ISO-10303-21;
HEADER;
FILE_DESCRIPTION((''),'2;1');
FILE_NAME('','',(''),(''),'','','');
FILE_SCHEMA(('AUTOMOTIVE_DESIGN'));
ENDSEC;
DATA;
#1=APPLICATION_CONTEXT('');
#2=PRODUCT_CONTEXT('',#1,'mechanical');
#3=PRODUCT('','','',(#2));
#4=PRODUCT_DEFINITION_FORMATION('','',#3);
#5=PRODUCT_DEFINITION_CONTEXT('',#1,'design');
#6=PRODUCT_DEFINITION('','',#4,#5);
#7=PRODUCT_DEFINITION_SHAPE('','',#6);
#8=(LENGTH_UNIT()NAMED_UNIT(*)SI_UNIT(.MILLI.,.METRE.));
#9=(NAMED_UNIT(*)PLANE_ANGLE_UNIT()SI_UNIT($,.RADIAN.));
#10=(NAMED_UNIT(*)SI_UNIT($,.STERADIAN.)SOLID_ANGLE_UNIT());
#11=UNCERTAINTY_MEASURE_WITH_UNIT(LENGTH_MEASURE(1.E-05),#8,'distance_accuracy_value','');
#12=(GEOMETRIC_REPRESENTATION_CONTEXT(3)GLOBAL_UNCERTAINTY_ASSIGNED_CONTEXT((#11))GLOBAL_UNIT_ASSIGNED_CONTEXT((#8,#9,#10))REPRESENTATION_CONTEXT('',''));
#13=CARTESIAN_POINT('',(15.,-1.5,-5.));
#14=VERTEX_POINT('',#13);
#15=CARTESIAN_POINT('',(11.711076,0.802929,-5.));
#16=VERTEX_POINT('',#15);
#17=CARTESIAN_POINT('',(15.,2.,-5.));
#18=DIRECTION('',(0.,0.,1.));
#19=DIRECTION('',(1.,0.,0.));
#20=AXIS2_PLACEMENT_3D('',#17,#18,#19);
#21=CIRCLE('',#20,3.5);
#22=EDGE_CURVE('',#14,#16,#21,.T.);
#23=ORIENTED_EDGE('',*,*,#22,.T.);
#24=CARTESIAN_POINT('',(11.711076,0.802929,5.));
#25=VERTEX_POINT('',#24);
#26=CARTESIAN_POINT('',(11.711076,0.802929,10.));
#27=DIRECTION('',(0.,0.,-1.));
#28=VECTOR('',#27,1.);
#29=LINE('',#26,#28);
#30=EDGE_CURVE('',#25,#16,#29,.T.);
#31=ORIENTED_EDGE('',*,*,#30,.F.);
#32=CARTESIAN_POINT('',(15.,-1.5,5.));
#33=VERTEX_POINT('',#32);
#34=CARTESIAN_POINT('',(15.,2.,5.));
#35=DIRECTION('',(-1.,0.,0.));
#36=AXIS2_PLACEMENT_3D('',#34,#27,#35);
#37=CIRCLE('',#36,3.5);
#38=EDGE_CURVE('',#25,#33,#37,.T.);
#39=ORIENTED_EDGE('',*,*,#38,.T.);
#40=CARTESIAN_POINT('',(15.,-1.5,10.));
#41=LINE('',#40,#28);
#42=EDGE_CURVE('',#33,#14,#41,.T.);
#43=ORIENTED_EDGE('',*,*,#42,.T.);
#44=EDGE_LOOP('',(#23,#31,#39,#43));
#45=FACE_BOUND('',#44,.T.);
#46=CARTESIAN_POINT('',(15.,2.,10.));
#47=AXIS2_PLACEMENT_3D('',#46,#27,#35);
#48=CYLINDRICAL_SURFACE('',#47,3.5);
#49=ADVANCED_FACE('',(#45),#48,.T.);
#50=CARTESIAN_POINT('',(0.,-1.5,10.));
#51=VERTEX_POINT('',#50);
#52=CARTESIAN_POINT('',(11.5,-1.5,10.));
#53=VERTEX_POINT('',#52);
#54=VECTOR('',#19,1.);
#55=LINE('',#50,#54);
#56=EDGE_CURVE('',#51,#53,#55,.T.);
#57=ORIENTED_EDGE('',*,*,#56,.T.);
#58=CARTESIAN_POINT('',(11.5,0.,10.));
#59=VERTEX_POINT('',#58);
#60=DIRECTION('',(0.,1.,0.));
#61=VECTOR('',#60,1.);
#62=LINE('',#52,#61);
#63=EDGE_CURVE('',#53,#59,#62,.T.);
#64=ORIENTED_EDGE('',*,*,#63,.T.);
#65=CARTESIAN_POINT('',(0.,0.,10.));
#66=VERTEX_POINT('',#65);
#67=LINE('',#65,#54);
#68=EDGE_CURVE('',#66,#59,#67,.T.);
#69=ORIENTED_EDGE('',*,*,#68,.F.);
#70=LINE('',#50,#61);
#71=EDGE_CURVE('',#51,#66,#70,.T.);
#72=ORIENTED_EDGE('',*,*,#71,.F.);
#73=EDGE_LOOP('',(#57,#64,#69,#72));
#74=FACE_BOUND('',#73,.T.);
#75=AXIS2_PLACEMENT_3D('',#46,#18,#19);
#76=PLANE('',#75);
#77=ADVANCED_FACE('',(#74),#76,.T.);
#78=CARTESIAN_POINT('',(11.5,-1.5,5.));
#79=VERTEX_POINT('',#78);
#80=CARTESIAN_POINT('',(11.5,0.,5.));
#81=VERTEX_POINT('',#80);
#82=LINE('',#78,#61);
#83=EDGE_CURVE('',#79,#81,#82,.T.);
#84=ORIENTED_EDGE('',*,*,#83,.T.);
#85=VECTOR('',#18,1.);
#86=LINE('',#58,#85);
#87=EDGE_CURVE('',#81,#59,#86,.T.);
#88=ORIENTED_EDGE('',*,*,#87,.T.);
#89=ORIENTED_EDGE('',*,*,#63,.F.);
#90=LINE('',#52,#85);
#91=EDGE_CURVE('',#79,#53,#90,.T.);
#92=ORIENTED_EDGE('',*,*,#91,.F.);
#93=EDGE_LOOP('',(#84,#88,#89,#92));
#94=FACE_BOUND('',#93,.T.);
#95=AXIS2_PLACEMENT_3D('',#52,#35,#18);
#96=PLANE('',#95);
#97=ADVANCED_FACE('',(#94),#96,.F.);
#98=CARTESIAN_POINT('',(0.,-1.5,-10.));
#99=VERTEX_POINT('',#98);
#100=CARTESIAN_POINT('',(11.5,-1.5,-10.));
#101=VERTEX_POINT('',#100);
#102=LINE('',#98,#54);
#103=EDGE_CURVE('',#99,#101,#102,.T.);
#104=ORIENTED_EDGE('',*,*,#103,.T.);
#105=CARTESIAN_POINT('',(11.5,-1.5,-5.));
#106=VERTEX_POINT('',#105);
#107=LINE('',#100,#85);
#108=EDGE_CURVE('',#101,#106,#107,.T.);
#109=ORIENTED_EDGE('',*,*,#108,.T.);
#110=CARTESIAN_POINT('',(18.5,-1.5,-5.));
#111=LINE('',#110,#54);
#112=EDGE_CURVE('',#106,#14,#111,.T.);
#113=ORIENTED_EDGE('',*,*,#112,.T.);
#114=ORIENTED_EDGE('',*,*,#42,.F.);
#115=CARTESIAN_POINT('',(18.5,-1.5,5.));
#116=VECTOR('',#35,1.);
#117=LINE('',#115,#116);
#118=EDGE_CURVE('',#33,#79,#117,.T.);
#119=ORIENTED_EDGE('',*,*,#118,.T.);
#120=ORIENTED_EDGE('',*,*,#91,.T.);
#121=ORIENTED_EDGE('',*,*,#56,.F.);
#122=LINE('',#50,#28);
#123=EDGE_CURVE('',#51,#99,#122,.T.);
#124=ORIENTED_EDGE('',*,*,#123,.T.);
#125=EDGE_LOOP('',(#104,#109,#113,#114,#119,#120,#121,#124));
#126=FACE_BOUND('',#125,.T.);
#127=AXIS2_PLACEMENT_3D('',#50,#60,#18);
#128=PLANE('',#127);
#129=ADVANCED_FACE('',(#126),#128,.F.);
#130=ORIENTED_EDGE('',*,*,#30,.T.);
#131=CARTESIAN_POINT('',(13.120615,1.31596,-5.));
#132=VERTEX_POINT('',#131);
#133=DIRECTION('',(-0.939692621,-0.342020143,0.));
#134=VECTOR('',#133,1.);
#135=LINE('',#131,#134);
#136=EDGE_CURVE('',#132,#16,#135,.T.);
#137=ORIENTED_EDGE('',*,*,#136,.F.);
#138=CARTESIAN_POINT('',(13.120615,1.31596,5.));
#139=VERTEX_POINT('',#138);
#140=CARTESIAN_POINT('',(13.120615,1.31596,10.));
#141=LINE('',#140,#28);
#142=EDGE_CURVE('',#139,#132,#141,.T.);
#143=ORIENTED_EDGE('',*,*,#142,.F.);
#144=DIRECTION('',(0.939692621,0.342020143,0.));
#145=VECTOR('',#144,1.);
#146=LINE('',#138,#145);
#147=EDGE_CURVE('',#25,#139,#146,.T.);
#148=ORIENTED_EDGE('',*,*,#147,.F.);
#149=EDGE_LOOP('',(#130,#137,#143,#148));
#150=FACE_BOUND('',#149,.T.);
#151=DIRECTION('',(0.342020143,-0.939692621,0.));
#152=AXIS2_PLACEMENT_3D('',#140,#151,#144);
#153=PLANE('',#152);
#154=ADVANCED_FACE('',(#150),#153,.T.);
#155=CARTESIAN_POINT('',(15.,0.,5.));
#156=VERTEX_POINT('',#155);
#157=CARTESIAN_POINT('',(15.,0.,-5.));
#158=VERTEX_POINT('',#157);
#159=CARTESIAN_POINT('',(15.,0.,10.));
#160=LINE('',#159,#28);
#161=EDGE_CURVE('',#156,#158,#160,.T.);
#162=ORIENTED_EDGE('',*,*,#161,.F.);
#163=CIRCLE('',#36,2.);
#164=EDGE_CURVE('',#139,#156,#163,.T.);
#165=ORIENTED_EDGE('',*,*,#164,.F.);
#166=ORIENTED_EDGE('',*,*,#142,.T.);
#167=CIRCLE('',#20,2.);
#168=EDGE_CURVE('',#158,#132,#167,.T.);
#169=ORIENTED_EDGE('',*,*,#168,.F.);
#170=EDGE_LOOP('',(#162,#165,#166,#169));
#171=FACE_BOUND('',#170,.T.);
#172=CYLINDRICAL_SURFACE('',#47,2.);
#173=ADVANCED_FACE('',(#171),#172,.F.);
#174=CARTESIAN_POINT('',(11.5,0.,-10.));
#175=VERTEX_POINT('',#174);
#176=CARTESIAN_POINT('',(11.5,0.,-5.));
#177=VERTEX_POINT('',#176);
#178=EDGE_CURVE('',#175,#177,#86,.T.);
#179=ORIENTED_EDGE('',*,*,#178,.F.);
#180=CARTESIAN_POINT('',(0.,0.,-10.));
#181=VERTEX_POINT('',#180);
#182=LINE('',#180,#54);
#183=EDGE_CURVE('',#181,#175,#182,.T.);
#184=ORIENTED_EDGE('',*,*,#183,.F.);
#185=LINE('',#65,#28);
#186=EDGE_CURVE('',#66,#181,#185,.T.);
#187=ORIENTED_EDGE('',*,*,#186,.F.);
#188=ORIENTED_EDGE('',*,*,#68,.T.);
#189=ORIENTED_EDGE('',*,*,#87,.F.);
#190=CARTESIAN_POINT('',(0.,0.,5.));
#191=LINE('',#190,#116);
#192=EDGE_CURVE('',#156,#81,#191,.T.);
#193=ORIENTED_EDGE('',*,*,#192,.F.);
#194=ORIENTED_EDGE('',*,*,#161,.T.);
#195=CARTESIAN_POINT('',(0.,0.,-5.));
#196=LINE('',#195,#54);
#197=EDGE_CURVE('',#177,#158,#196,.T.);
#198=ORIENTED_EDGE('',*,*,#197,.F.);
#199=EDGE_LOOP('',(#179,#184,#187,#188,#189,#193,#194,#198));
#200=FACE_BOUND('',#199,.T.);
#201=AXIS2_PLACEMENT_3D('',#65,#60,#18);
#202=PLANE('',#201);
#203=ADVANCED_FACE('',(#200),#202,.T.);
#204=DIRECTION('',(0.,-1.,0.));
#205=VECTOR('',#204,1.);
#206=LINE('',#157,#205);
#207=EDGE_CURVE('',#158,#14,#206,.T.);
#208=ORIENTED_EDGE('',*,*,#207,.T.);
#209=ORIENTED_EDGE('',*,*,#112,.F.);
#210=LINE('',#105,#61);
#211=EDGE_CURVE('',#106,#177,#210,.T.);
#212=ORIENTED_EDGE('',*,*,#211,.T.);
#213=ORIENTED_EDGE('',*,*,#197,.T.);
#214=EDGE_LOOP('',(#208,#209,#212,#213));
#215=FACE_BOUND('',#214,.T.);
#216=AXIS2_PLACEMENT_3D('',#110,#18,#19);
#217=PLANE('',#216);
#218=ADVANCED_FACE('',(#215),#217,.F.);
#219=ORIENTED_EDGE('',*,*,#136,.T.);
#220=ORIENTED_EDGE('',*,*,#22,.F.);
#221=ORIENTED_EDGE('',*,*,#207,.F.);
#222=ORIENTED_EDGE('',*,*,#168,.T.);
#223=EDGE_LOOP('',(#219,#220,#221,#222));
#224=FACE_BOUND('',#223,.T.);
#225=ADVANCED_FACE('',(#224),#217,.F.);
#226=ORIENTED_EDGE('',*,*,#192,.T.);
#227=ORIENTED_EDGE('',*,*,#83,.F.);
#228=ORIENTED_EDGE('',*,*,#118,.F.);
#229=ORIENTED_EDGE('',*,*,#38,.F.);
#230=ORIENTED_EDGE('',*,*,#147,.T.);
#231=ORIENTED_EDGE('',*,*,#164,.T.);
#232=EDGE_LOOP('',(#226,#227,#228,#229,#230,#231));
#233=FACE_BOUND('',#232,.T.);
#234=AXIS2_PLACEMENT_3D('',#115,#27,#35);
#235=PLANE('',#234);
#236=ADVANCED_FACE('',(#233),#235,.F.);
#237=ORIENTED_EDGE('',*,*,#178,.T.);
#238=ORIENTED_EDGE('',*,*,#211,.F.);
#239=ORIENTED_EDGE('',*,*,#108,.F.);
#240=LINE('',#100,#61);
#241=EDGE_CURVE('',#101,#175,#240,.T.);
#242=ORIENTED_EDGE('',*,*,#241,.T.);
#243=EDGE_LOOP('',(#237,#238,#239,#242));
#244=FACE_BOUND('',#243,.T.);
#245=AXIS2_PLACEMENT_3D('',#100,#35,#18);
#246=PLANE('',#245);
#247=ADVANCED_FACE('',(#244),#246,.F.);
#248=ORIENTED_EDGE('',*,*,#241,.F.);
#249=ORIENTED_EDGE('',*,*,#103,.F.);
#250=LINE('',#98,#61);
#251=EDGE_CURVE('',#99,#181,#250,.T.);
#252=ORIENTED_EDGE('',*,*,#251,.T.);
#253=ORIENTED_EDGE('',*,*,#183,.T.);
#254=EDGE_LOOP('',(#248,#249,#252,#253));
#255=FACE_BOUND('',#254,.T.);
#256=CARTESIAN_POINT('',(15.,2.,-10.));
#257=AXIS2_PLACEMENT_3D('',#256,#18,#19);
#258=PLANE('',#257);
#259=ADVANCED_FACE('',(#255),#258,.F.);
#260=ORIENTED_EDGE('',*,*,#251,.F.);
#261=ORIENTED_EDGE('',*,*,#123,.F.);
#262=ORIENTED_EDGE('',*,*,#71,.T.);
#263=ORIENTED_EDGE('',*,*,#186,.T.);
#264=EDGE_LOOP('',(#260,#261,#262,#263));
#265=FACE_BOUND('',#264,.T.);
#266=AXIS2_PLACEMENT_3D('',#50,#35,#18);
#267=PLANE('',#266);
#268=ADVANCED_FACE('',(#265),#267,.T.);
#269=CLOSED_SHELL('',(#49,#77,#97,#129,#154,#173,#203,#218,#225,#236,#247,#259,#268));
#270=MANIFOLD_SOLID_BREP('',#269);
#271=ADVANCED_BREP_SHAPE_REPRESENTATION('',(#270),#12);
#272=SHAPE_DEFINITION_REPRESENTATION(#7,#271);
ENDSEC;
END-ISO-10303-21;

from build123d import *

# Parameters (mm, degrees)
BASE_FLANGE1_DEPTH      = 10
CUT_EXTRUDE1_DEPTH      = 22.737065119
CUT_EXTRUDE1_DEPTH_BACK = 22.737065119
SKETCH11_W              = 7
SKETCH11_H              = 5


# Sheet-metal steps are written as plain solids
with BuildPart() as part:
    # Sketch1 → Base-Flange1 (new, symmetric)
    with BuildSketch(Plane.XY):
        with BuildLine():
            Line((0, 0), (15, 0))
            ThreePointArc((15, 0), (16.147152873, 3.638304089), (13.120614758, 1.315959713))
            Line((13.120614758, 1.315959713), (11.711075827, 0.802929498))
            ThreePointArc((11.711075827, 0.802929498), (17.007517527, 4.867032155), (15, -1.5))
            Line((15, -1.5), (0, -1.5))
            Line((0, -1.5), (0, 0))
        make_face()
    extrude(amount=BASE_FLANGE1_DEPTH, both=True)

    # Sketch11 → Cut-Extrude1 (cut, two sides: drawn at the far end of the back side and taken through both)
    with BuildSketch(Plane(origin=(0, 0, 0), x_dir=(1, 0, 0), z_dir=(0, 1, 0)).offset(-CUT_EXTRUDE1_DEPTH_BACK)):
        with Locations((15, 7.5)):
            Rectangle(SKETCH11_W, SKETCH11_H)
        with Locations((15, -7.5)):
            Rectangle(SKETCH11_W, SKETCH11_H)
    extrude(amount=CUT_EXTRUDE1_DEPTH + CUT_EXTRUDE1_DEPTH_BACK, mode=Mode.SUBTRACT)


solid = part.part
